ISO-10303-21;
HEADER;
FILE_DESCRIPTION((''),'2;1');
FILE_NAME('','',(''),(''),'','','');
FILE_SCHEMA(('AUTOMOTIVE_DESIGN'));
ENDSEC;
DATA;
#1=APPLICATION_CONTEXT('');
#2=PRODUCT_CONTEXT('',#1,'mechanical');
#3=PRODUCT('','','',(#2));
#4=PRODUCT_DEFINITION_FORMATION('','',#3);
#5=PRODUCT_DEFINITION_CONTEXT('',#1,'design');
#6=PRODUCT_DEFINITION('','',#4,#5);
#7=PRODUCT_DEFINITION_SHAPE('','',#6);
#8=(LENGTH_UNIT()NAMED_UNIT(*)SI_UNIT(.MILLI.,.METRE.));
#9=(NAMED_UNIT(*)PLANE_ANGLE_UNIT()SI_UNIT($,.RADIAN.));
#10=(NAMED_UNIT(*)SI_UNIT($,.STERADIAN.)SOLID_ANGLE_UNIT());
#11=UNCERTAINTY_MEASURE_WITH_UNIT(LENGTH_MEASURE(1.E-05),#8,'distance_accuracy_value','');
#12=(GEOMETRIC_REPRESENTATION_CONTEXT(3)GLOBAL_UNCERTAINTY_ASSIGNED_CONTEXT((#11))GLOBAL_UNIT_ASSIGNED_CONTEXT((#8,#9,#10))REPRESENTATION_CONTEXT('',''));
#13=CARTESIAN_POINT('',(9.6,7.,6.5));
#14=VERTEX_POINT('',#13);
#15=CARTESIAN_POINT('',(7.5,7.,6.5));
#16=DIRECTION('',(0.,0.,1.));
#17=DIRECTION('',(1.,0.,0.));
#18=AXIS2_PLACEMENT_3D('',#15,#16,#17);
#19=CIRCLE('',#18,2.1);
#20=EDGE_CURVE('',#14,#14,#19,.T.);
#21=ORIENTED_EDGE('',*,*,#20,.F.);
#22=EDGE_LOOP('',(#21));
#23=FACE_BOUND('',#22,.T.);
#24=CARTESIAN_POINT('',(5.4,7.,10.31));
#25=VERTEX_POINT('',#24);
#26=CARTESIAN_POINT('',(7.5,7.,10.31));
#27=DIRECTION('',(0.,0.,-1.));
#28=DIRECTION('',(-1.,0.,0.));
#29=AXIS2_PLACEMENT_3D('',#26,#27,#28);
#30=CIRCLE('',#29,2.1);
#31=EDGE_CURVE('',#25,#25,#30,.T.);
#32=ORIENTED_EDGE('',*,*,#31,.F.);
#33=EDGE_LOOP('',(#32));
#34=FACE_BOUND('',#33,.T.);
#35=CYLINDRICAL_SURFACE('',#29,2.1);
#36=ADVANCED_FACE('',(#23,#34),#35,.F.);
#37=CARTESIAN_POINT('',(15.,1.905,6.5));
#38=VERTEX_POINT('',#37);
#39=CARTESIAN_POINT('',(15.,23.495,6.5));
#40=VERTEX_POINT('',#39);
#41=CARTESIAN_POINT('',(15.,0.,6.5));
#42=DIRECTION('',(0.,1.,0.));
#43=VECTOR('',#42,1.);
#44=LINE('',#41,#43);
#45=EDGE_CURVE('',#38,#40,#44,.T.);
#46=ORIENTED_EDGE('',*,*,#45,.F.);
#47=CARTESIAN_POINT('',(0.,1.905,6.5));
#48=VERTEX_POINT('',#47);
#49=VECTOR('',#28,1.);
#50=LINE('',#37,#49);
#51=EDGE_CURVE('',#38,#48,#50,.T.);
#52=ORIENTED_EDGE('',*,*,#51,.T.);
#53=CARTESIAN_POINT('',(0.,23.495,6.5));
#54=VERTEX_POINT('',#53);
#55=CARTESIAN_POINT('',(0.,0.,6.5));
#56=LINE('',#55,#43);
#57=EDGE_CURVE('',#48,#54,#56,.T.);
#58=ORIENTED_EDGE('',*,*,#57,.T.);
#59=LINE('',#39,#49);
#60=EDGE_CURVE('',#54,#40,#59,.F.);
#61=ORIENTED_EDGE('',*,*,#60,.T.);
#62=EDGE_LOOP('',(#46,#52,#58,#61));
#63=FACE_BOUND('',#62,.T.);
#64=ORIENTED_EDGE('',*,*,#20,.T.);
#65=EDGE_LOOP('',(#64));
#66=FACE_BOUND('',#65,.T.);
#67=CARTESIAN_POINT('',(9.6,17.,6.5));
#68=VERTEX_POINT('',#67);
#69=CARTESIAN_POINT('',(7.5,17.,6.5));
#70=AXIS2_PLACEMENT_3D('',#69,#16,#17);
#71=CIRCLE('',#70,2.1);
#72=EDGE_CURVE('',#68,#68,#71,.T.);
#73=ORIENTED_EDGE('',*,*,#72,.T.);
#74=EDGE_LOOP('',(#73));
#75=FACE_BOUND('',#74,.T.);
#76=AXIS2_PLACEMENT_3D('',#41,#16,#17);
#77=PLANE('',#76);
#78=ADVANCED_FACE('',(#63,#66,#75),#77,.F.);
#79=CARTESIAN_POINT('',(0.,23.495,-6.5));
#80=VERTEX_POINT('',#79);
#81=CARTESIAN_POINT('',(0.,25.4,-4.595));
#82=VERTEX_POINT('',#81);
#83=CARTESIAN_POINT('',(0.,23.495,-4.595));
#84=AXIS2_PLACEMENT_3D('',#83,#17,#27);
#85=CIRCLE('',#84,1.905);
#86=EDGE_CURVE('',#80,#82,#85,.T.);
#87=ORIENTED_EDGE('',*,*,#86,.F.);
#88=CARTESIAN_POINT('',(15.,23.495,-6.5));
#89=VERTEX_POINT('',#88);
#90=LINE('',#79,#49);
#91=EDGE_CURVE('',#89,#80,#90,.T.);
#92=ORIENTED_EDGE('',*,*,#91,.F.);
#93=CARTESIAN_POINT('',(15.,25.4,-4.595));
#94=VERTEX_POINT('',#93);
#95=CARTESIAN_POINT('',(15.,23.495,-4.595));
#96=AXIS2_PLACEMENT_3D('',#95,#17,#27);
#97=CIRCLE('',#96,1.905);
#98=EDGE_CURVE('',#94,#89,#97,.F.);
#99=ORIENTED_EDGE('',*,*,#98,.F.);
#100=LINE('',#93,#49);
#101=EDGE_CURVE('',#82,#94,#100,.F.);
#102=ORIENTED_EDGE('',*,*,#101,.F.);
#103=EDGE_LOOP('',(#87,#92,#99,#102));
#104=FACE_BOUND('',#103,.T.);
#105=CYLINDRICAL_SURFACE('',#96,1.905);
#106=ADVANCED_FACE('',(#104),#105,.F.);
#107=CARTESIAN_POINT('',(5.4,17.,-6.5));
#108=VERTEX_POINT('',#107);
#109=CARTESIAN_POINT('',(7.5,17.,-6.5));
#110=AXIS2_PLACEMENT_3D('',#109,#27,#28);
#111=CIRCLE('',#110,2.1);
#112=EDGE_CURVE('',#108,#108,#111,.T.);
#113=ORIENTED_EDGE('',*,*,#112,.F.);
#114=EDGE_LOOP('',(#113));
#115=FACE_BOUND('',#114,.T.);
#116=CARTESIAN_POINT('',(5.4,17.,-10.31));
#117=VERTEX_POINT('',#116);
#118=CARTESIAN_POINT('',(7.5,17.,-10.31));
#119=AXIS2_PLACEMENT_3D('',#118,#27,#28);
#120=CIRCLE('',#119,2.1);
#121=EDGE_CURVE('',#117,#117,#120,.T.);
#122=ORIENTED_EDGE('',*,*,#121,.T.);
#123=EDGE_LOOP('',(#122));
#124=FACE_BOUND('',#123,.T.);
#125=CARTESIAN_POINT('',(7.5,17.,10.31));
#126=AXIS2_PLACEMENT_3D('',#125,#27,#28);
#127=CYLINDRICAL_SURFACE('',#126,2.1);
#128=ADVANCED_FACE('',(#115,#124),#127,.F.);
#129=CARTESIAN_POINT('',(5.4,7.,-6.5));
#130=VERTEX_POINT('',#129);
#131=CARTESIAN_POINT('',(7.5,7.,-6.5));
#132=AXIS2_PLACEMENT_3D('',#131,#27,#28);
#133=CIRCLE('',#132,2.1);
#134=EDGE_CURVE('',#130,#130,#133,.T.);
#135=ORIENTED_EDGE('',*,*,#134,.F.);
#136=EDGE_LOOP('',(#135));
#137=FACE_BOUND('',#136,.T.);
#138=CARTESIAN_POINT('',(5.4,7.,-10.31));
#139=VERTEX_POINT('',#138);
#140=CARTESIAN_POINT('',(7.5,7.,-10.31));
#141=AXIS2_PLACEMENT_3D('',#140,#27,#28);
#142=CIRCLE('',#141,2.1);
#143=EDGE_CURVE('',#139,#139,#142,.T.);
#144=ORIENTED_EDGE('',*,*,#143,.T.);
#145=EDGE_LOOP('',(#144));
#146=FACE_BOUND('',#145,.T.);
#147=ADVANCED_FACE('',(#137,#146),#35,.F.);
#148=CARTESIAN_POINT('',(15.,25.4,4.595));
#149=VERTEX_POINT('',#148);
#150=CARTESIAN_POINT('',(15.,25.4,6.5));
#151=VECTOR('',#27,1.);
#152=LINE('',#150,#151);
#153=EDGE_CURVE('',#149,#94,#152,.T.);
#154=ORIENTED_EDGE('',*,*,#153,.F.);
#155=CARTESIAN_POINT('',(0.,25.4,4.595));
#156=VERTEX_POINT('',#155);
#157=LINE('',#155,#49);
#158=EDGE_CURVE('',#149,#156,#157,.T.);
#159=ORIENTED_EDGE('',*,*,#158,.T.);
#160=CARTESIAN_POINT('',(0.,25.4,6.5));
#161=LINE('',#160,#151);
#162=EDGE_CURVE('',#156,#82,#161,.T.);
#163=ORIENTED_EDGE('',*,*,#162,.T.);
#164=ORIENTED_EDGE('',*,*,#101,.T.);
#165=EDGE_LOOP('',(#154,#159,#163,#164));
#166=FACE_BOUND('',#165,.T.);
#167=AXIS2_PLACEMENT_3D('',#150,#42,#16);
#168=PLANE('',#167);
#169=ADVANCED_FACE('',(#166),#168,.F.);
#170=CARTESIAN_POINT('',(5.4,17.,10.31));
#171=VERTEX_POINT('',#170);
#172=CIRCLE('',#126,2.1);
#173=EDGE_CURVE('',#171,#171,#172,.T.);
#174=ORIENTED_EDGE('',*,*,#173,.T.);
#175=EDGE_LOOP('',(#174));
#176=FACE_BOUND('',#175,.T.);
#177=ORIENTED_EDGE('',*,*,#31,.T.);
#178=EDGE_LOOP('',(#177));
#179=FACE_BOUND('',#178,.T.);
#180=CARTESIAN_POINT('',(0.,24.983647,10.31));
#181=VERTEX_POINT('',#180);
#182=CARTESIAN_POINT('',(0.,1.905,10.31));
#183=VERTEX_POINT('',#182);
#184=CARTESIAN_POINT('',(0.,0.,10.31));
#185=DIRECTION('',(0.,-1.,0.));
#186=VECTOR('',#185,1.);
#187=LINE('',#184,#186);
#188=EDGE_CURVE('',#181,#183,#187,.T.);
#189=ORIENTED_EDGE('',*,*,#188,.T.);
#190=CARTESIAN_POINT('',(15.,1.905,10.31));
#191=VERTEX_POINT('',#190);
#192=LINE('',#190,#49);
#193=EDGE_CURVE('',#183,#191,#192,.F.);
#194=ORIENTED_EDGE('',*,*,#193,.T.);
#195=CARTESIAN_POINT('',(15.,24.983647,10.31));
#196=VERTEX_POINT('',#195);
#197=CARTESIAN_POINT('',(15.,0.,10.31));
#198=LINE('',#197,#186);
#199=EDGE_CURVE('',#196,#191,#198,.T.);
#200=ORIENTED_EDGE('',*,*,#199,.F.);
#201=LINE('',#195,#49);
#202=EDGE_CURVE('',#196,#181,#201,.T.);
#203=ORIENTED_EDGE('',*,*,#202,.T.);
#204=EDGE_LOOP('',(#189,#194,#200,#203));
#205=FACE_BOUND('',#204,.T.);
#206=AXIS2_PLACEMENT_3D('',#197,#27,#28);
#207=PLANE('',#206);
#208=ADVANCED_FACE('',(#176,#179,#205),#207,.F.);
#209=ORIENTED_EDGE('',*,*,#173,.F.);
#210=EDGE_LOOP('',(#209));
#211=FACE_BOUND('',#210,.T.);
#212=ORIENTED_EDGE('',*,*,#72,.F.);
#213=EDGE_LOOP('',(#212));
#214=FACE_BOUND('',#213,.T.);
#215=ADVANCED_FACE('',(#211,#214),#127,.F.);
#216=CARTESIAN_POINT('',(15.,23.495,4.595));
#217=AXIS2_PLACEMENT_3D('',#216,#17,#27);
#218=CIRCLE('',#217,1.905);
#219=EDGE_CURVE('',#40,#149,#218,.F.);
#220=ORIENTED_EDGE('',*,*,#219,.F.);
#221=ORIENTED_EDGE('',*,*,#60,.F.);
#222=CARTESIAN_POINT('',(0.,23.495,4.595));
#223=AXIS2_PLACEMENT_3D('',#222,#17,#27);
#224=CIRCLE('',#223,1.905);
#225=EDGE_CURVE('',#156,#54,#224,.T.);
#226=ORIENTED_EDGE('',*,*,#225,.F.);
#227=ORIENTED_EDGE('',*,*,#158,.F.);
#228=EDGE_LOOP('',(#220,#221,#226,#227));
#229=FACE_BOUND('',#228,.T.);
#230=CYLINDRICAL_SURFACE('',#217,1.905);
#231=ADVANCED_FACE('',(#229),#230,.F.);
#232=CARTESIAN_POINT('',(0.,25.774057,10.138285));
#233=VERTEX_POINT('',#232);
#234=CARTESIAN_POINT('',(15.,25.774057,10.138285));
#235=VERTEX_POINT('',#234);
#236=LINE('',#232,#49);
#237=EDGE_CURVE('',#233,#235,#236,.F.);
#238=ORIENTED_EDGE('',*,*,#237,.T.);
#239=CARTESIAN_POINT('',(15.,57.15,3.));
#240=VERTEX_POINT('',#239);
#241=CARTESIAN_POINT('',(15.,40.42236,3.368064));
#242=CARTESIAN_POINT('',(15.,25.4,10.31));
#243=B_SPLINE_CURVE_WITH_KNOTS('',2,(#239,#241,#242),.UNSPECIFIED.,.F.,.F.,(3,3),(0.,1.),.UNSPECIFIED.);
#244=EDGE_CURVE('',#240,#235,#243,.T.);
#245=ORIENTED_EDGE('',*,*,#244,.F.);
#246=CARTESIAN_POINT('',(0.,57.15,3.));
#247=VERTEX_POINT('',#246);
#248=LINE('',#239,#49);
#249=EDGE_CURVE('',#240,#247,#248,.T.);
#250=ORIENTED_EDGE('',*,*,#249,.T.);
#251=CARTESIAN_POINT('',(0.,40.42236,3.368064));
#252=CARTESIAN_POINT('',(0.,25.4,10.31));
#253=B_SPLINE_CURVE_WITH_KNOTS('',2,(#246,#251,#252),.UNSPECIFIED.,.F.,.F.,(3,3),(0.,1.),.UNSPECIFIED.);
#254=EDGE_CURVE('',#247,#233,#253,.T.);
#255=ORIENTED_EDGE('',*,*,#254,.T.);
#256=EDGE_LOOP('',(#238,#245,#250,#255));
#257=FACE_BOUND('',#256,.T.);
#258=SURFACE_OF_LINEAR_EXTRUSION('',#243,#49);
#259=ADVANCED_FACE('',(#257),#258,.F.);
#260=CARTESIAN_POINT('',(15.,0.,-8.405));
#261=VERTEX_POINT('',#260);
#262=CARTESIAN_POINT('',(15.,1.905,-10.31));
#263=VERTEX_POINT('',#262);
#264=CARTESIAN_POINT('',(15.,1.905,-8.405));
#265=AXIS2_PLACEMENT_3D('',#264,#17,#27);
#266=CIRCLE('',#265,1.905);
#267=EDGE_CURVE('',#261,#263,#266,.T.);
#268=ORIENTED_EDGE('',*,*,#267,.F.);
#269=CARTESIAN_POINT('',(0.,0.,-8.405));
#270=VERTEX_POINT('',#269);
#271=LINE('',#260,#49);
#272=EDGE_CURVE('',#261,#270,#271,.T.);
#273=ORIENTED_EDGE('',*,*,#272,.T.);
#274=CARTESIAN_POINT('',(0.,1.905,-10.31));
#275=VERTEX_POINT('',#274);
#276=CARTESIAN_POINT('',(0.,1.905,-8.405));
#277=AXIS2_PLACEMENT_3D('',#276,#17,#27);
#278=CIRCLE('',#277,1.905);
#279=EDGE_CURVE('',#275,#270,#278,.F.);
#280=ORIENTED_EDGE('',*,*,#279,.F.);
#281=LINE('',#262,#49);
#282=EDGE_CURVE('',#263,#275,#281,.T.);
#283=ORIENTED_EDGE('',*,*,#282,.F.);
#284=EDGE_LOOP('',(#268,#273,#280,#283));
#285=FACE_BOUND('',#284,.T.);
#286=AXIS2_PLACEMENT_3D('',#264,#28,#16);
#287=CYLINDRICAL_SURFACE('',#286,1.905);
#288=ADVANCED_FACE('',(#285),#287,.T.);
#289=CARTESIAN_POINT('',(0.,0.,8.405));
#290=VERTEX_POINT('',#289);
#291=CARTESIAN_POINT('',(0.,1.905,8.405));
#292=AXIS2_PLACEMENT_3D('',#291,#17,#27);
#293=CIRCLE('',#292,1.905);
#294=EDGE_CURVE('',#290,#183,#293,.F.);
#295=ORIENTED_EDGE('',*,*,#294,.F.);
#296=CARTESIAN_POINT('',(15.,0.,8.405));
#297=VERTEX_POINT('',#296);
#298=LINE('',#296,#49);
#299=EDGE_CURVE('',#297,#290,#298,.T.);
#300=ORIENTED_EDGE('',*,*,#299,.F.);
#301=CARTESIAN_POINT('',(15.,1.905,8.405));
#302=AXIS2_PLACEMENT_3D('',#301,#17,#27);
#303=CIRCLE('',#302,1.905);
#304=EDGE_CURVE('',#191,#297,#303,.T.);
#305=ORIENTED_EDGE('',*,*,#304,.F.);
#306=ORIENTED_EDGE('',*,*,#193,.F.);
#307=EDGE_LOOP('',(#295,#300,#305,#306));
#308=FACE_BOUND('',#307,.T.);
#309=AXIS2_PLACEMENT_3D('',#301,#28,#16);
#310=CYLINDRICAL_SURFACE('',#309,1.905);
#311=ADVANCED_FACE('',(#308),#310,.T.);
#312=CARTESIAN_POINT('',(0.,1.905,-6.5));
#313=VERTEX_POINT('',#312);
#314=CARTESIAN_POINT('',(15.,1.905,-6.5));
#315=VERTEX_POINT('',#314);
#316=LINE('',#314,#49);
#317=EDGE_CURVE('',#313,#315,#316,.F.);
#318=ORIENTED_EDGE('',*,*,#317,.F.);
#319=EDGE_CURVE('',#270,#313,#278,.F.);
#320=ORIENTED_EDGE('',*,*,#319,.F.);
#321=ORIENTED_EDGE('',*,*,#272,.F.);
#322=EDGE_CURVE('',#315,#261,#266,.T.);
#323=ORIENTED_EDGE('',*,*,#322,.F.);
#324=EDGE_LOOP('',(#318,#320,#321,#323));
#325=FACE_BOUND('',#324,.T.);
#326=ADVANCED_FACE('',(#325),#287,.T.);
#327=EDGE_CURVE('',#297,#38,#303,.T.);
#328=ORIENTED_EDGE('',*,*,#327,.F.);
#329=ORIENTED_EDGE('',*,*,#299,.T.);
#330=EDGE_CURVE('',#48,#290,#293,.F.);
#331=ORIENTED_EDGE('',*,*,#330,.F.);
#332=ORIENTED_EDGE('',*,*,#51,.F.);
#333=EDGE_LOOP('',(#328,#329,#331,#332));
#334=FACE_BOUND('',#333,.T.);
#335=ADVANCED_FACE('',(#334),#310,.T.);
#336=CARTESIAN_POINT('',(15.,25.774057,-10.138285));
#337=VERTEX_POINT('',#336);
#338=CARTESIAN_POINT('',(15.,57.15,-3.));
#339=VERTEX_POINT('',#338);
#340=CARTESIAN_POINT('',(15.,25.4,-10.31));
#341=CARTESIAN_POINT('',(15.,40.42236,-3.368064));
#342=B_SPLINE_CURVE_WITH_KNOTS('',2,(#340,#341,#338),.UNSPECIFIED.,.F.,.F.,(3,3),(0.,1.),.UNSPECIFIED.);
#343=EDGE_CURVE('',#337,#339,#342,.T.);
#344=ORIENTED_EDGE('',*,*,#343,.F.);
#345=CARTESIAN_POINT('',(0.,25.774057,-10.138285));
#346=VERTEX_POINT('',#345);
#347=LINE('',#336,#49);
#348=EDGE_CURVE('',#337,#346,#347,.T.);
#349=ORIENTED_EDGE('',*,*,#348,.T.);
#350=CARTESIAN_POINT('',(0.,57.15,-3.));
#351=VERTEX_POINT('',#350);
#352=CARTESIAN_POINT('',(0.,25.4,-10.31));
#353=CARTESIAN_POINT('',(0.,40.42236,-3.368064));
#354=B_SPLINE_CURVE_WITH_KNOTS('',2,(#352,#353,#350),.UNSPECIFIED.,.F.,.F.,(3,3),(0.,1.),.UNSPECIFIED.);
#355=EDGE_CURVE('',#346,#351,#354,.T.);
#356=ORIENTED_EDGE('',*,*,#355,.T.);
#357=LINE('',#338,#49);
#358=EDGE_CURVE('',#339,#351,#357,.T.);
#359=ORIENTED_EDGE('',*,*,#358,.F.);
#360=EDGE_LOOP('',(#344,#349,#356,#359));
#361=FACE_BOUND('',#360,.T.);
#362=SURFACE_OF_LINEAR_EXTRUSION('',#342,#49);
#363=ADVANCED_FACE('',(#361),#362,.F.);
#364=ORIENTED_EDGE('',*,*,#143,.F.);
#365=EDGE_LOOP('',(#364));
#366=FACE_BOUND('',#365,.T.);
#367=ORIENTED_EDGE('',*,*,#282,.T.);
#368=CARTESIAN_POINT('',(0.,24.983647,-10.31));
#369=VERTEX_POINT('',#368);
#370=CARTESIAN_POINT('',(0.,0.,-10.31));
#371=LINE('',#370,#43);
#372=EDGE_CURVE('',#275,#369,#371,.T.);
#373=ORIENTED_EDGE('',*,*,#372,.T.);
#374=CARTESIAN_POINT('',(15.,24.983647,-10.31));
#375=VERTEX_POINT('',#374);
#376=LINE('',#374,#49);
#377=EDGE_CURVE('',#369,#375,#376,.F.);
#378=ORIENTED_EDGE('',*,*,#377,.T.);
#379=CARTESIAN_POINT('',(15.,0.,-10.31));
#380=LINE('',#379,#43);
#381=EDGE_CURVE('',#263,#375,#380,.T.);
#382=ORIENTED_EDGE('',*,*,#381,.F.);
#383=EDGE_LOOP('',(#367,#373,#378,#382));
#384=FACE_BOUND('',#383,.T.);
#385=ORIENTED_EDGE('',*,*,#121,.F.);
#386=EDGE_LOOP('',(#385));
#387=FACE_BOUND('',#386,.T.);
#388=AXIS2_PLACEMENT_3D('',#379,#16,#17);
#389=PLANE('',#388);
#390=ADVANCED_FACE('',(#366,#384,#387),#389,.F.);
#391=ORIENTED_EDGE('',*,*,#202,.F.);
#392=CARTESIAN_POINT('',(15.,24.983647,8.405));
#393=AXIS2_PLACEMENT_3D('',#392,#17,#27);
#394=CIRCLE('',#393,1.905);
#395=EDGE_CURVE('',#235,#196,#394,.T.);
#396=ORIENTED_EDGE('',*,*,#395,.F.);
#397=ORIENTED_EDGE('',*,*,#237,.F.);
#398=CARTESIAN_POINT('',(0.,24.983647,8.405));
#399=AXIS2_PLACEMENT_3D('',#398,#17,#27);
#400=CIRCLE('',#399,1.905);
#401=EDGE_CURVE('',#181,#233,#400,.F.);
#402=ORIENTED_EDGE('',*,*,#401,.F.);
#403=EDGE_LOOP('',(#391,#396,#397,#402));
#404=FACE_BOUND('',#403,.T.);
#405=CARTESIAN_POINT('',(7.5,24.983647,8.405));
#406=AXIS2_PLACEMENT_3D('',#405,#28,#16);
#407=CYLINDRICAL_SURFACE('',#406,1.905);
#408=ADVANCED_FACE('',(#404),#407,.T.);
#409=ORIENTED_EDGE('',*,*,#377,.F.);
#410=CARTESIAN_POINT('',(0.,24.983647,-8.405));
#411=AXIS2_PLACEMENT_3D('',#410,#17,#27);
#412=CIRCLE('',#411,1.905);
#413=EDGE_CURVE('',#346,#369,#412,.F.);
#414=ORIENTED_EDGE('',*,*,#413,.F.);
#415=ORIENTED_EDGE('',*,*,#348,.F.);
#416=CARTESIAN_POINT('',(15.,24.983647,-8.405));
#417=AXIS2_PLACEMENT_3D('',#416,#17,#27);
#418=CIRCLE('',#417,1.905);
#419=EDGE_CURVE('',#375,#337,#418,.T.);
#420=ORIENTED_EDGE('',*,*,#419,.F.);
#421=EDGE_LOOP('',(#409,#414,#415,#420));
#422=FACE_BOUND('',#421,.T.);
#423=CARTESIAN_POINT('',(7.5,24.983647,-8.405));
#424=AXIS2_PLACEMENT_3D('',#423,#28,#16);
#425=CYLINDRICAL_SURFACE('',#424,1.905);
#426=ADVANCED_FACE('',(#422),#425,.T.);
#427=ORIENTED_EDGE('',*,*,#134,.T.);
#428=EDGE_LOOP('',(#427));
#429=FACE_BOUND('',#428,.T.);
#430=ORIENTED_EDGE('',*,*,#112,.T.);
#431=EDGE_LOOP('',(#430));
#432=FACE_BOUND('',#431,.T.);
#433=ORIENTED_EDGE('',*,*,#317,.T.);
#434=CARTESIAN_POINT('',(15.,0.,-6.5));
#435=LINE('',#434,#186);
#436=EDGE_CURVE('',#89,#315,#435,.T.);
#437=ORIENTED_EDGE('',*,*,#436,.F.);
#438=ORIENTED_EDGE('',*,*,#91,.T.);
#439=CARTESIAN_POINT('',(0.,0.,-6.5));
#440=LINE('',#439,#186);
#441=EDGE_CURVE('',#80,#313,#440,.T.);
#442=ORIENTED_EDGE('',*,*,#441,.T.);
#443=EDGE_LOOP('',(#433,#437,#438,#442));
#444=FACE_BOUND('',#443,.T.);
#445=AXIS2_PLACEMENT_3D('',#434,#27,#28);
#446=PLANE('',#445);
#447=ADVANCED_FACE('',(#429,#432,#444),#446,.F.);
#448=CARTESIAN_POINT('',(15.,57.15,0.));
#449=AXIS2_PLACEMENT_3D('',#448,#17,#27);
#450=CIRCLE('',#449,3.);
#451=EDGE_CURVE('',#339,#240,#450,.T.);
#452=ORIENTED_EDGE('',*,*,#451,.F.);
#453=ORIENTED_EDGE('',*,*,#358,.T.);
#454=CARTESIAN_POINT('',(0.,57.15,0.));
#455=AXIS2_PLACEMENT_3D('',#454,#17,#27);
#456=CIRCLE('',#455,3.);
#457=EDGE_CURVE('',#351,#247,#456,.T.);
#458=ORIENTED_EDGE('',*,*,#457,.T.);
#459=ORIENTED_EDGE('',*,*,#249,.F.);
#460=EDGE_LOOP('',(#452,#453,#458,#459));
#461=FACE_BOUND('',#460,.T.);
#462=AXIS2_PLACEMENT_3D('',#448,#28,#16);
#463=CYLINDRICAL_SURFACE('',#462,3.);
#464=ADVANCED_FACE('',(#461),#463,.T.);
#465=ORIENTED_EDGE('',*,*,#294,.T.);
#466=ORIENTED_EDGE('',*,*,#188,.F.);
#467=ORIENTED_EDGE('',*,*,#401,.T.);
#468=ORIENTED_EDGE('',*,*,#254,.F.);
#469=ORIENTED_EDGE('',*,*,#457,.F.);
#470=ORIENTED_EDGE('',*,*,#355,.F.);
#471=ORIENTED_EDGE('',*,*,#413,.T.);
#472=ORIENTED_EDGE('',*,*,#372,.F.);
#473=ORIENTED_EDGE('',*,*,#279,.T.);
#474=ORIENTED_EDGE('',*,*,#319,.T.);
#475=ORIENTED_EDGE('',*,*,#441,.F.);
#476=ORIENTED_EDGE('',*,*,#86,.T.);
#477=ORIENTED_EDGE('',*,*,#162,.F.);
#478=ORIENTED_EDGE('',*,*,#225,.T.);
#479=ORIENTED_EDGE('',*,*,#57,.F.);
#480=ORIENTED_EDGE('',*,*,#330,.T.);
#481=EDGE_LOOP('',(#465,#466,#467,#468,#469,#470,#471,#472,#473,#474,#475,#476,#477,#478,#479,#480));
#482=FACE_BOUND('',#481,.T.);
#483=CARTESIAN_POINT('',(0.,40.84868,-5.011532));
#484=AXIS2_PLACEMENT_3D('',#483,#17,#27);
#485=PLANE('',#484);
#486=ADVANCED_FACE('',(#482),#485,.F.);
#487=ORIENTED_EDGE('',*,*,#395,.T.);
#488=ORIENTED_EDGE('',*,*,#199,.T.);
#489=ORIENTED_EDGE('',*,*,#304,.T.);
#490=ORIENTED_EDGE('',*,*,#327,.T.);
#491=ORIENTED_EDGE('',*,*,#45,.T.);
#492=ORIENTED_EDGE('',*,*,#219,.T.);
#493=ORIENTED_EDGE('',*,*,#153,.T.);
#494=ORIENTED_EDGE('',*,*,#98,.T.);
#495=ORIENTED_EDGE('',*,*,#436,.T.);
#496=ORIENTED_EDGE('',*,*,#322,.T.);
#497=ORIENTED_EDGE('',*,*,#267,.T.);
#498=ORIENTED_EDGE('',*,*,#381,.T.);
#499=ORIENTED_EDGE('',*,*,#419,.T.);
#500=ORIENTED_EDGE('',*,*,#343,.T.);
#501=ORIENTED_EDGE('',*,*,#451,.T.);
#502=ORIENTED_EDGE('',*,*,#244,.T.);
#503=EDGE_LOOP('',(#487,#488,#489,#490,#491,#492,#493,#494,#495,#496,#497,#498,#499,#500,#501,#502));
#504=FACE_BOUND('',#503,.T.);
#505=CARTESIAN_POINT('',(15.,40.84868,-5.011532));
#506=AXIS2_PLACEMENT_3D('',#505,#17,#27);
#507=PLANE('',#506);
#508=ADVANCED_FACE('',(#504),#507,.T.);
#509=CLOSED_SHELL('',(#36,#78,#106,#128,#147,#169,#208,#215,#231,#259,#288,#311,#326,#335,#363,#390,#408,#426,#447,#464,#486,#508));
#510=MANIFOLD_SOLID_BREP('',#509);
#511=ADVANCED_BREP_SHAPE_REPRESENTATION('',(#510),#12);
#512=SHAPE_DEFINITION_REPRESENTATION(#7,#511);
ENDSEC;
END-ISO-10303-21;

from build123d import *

# Parameters (mm, degrees)
BOSS_EXTRUDE1_DEPTH = 15
SKETCH2_R           = 2.1
CUT_EXTRUDE1_DEPTH  = 66.331515512
FILLET2_R           = 1.905


with BuildPart() as part:
    # Sketch1 → Boss-Extrude1 (new body)
    with BuildSketch(Plane(origin=(0, 0, 0), x_dir=(0, 0, -1), z_dir=(1, 0, 0))):
        with BuildLine():
            Line((-6.5, 0), (-10.31, 0))
            Line((-10.31, 0), (-10.31, 25.4))
            add(Edge.make_bspline(
                [(-10.31, 25.4), (-3.368064257, 40.422360056), (-3, 57.15)],
                knots=[0, 0, 0, 1, 1, 1], degree=2))
            ThreePointArc((-3, 57.15), (0, 60.15), (3, 57.15))
            add(Edge.make_bspline(
                [(10.31, 25.4), (3.368064257, 40.422360056), (3, 57.15)],
                knots=[0, 0, 0, 1, 1, 1], degree=2))
            Line((10.31, 25.4), (10.31, 0))
            Line((10.31, 0), (6.5, 0))
            Line((6.5, 0), (6.5, 25.4))
            Line((6.5, 25.4), (-6.5, 25.4))
            Line((-6.5, 25.4), (-6.5, 0))
        make_face()
    extrude(amount=BOSS_EXTRUDE1_DEPTH)

    # Sketch2 → Cut-Extrude1 (cut, through all)
    with BuildSketch(Plane(origin=(0, 0, -10.31), x_dir=(-1, 0, 0), z_dir=(0, 0, -1))):
        with Locations((-7.5, 7)):
            Circle(SKETCH2_R)
        with Locations((-7.5, 17)):
            Circle(SKETCH2_R)
    extrude(amount=-CUT_EXTRUDE1_DEPTH, mode=Mode.SUBTRACT)

    # Fillet2
    fillet2_edges = [part.edges().sort_by_distance(p)[0] for p in [
        (7.5, 25.4, -10.31),
        (7.5, 0, -10.31),
        (7.5, 0, -6.5),
        (7.5, 0, 6.5),
        (7.5, 0, 10.31),
        (7.5, 25.4, -6.5),
        (7.5, 25.4, 6.5),
        (7.5, 25.4, 10.31),
    ]]
    fillet(fillet2_edges, radius=FILLET2_R - 0.0001)  # a hair under: the kernel refuses the full size


solid = part.part
